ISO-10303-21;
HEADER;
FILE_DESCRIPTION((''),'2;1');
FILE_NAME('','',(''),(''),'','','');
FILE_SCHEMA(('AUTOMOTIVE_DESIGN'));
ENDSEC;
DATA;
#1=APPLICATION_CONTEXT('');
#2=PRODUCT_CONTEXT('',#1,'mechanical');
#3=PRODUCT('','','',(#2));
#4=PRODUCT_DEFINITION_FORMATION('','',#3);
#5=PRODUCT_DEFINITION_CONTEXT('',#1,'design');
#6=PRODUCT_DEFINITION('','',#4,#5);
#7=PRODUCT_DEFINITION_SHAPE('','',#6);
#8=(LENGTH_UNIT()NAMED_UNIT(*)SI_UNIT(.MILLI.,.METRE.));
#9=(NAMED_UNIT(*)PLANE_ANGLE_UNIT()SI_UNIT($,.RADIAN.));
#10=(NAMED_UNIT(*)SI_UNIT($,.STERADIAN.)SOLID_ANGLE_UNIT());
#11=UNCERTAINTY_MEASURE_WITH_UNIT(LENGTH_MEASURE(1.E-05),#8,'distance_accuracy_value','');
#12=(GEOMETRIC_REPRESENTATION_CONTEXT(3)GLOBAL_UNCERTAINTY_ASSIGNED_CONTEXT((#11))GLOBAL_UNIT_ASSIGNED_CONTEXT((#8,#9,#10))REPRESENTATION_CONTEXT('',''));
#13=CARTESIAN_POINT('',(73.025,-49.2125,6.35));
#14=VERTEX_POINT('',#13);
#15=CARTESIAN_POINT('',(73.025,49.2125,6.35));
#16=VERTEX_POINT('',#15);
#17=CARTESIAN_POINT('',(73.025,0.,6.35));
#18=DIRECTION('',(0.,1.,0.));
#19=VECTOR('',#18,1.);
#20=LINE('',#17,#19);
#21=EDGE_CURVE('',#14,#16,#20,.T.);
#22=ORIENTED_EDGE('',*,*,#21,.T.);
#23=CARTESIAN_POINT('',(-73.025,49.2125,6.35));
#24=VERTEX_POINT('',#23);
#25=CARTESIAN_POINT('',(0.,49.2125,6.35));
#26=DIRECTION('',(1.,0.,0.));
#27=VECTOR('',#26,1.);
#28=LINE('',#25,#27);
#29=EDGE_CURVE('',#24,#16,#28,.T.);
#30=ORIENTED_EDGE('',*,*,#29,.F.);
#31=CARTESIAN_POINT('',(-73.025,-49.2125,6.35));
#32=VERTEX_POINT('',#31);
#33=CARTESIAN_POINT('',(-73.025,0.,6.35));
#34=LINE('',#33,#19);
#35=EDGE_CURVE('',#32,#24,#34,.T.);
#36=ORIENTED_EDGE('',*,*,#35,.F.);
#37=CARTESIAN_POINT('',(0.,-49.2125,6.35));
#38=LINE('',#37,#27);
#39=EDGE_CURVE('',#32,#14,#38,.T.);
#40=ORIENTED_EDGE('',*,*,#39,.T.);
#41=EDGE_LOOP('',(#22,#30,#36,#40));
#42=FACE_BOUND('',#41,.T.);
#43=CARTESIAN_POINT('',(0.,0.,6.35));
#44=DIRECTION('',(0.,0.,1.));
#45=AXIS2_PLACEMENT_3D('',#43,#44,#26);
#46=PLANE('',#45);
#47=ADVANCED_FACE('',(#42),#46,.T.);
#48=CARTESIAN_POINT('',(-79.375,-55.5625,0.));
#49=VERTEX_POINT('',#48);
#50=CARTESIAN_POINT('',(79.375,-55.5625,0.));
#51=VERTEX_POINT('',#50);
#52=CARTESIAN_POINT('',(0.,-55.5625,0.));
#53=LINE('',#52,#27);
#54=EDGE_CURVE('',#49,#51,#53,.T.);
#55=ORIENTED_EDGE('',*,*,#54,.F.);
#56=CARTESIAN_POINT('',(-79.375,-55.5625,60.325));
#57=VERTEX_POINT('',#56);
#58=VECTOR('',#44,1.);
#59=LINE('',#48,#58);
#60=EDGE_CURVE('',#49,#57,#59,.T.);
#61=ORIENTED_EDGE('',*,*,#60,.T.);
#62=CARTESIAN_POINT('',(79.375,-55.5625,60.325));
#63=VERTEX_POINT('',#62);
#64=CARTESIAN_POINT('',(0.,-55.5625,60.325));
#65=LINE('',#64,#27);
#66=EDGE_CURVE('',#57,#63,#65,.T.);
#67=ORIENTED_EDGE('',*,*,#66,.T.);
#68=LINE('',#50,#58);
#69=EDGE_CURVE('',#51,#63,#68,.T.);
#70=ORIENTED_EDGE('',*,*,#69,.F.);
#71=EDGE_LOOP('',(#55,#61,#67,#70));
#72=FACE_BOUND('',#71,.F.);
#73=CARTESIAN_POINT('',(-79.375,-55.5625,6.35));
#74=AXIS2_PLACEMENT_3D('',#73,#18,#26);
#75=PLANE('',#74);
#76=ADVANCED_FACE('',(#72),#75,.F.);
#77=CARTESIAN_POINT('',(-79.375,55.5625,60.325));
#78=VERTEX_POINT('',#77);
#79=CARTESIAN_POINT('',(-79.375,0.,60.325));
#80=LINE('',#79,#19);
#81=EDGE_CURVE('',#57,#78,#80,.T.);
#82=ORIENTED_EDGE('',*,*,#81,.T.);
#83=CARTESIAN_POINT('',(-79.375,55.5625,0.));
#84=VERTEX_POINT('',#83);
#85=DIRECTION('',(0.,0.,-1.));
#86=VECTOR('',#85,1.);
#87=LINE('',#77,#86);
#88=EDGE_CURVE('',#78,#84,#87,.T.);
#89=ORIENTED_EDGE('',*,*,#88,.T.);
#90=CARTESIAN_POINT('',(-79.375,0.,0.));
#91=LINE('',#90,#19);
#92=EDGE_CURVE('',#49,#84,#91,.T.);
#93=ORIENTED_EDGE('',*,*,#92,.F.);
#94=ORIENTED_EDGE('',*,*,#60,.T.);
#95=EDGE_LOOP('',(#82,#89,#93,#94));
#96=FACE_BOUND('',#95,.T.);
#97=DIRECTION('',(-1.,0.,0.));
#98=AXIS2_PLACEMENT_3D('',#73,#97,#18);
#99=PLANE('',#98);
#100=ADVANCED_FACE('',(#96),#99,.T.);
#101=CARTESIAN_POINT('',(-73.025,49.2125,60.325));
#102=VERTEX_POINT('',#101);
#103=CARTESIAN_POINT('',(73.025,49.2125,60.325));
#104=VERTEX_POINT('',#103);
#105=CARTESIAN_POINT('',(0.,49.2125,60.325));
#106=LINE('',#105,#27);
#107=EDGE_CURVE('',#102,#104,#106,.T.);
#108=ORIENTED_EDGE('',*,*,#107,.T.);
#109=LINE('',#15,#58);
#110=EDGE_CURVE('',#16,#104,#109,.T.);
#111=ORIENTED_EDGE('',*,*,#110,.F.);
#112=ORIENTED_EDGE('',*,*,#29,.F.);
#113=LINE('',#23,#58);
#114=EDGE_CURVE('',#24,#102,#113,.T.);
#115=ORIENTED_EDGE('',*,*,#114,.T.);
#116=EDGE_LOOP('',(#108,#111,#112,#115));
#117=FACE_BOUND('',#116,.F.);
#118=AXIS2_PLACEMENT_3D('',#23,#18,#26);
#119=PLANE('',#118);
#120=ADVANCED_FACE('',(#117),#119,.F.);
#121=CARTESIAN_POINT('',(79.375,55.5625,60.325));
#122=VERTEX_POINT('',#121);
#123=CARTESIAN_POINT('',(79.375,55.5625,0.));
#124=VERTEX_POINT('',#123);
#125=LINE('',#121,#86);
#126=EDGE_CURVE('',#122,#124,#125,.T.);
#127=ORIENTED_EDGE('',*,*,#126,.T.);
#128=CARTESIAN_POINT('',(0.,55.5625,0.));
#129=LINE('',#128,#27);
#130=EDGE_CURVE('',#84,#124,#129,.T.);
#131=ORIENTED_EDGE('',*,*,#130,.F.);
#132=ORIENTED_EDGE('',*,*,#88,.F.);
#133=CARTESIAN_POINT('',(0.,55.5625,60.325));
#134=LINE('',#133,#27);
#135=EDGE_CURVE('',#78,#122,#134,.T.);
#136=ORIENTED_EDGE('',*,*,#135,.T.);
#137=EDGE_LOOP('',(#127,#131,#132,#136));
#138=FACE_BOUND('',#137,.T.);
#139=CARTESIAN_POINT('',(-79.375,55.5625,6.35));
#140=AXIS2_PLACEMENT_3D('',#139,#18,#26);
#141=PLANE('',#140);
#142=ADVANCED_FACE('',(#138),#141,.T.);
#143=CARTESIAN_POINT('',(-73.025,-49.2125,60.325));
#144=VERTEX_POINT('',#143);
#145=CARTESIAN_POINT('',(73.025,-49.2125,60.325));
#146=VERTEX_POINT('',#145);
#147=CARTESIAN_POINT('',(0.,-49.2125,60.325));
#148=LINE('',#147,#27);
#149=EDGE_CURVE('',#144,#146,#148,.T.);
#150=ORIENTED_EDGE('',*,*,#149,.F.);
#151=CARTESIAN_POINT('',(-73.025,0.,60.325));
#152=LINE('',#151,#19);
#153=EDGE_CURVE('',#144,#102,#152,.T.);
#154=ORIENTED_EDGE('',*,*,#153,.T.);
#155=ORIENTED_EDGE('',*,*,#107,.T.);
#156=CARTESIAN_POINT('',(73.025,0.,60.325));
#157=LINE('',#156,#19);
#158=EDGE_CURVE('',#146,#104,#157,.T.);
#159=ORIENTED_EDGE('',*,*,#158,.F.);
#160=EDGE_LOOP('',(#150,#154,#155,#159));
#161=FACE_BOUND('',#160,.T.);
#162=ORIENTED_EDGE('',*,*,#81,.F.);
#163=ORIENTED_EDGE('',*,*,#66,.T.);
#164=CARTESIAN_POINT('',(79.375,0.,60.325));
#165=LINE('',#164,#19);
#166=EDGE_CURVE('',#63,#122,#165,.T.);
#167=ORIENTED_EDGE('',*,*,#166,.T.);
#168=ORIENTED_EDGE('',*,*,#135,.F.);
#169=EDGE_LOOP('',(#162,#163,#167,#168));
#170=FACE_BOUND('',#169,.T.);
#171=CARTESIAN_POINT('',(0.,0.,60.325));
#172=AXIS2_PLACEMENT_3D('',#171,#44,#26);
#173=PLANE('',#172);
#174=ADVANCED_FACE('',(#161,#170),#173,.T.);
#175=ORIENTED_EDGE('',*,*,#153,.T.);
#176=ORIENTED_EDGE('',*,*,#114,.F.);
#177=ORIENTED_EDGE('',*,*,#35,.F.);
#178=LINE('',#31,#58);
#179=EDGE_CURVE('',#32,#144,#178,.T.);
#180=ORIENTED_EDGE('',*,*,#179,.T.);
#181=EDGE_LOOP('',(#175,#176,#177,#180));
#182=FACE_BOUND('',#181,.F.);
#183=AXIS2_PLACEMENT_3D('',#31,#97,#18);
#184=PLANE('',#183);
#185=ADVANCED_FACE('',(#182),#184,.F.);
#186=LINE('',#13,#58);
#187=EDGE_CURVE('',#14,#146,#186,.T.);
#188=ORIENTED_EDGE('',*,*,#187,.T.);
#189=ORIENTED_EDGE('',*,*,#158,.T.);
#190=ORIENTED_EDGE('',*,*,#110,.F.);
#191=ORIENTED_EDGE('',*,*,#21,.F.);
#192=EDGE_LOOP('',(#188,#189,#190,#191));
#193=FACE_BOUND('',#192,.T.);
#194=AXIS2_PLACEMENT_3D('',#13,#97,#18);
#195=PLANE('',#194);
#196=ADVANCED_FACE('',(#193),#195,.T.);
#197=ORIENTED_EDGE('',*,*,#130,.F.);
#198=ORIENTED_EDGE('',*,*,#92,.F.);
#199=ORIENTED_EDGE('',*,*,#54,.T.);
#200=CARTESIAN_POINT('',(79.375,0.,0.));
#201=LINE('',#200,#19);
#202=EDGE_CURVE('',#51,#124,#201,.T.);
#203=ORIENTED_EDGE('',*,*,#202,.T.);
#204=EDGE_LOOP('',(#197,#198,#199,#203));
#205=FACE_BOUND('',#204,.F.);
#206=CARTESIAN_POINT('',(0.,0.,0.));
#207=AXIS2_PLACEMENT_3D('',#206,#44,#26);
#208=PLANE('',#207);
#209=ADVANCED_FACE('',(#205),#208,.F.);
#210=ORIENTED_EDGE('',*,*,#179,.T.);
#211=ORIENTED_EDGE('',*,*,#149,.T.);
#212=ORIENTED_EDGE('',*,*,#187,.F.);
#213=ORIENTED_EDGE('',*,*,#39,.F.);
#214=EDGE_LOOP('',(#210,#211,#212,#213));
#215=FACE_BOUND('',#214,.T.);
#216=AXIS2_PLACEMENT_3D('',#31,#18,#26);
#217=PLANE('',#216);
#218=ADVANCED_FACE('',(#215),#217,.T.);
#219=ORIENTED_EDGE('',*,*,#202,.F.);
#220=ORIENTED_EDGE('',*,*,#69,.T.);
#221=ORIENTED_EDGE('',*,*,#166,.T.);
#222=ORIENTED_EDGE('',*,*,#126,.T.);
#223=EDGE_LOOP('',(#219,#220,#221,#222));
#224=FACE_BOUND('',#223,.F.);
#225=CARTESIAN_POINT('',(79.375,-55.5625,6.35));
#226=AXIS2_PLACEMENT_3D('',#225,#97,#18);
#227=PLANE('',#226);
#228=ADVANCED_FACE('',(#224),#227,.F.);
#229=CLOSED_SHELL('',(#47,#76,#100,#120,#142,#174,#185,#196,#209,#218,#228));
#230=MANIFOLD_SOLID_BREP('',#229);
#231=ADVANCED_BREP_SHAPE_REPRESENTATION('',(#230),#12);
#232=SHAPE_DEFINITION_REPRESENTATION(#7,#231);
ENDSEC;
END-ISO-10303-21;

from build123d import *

# Parameters (mm, degrees)
F2_W     = 158.75
F2_H     = 111.125
F3_DEPTH = 6.35
F4_W     = 158.75
F4_H     = 111.125
F4_W_2   = 146.05
F4_H_2   = 98.425
F5_DEPTH = 53.975


# Not quite as in the source:
# - a length typed as a fraction of an inch, garbled in the dataset ("3 / 203.2 mm" for 3/8 in), is restored


with BuildPart() as f3:
    # F2 (on Top) → F3 (new body)
    with BuildSketch(Plane.XY):
        Rectangle(F2_W, F2_H)
    extrude(amount=F3_DEPTH)

    # F4 (on face) → F5 (join)
    with BuildSketch(Plane.XY.offset(6.35)):
        Rectangle(F4_W, F4_H)
        Rectangle(F4_W_2, F4_H_2, mode=Mode.SUBTRACT)
    extrude(amount=F5_DEPTH)


solid = f3.part
